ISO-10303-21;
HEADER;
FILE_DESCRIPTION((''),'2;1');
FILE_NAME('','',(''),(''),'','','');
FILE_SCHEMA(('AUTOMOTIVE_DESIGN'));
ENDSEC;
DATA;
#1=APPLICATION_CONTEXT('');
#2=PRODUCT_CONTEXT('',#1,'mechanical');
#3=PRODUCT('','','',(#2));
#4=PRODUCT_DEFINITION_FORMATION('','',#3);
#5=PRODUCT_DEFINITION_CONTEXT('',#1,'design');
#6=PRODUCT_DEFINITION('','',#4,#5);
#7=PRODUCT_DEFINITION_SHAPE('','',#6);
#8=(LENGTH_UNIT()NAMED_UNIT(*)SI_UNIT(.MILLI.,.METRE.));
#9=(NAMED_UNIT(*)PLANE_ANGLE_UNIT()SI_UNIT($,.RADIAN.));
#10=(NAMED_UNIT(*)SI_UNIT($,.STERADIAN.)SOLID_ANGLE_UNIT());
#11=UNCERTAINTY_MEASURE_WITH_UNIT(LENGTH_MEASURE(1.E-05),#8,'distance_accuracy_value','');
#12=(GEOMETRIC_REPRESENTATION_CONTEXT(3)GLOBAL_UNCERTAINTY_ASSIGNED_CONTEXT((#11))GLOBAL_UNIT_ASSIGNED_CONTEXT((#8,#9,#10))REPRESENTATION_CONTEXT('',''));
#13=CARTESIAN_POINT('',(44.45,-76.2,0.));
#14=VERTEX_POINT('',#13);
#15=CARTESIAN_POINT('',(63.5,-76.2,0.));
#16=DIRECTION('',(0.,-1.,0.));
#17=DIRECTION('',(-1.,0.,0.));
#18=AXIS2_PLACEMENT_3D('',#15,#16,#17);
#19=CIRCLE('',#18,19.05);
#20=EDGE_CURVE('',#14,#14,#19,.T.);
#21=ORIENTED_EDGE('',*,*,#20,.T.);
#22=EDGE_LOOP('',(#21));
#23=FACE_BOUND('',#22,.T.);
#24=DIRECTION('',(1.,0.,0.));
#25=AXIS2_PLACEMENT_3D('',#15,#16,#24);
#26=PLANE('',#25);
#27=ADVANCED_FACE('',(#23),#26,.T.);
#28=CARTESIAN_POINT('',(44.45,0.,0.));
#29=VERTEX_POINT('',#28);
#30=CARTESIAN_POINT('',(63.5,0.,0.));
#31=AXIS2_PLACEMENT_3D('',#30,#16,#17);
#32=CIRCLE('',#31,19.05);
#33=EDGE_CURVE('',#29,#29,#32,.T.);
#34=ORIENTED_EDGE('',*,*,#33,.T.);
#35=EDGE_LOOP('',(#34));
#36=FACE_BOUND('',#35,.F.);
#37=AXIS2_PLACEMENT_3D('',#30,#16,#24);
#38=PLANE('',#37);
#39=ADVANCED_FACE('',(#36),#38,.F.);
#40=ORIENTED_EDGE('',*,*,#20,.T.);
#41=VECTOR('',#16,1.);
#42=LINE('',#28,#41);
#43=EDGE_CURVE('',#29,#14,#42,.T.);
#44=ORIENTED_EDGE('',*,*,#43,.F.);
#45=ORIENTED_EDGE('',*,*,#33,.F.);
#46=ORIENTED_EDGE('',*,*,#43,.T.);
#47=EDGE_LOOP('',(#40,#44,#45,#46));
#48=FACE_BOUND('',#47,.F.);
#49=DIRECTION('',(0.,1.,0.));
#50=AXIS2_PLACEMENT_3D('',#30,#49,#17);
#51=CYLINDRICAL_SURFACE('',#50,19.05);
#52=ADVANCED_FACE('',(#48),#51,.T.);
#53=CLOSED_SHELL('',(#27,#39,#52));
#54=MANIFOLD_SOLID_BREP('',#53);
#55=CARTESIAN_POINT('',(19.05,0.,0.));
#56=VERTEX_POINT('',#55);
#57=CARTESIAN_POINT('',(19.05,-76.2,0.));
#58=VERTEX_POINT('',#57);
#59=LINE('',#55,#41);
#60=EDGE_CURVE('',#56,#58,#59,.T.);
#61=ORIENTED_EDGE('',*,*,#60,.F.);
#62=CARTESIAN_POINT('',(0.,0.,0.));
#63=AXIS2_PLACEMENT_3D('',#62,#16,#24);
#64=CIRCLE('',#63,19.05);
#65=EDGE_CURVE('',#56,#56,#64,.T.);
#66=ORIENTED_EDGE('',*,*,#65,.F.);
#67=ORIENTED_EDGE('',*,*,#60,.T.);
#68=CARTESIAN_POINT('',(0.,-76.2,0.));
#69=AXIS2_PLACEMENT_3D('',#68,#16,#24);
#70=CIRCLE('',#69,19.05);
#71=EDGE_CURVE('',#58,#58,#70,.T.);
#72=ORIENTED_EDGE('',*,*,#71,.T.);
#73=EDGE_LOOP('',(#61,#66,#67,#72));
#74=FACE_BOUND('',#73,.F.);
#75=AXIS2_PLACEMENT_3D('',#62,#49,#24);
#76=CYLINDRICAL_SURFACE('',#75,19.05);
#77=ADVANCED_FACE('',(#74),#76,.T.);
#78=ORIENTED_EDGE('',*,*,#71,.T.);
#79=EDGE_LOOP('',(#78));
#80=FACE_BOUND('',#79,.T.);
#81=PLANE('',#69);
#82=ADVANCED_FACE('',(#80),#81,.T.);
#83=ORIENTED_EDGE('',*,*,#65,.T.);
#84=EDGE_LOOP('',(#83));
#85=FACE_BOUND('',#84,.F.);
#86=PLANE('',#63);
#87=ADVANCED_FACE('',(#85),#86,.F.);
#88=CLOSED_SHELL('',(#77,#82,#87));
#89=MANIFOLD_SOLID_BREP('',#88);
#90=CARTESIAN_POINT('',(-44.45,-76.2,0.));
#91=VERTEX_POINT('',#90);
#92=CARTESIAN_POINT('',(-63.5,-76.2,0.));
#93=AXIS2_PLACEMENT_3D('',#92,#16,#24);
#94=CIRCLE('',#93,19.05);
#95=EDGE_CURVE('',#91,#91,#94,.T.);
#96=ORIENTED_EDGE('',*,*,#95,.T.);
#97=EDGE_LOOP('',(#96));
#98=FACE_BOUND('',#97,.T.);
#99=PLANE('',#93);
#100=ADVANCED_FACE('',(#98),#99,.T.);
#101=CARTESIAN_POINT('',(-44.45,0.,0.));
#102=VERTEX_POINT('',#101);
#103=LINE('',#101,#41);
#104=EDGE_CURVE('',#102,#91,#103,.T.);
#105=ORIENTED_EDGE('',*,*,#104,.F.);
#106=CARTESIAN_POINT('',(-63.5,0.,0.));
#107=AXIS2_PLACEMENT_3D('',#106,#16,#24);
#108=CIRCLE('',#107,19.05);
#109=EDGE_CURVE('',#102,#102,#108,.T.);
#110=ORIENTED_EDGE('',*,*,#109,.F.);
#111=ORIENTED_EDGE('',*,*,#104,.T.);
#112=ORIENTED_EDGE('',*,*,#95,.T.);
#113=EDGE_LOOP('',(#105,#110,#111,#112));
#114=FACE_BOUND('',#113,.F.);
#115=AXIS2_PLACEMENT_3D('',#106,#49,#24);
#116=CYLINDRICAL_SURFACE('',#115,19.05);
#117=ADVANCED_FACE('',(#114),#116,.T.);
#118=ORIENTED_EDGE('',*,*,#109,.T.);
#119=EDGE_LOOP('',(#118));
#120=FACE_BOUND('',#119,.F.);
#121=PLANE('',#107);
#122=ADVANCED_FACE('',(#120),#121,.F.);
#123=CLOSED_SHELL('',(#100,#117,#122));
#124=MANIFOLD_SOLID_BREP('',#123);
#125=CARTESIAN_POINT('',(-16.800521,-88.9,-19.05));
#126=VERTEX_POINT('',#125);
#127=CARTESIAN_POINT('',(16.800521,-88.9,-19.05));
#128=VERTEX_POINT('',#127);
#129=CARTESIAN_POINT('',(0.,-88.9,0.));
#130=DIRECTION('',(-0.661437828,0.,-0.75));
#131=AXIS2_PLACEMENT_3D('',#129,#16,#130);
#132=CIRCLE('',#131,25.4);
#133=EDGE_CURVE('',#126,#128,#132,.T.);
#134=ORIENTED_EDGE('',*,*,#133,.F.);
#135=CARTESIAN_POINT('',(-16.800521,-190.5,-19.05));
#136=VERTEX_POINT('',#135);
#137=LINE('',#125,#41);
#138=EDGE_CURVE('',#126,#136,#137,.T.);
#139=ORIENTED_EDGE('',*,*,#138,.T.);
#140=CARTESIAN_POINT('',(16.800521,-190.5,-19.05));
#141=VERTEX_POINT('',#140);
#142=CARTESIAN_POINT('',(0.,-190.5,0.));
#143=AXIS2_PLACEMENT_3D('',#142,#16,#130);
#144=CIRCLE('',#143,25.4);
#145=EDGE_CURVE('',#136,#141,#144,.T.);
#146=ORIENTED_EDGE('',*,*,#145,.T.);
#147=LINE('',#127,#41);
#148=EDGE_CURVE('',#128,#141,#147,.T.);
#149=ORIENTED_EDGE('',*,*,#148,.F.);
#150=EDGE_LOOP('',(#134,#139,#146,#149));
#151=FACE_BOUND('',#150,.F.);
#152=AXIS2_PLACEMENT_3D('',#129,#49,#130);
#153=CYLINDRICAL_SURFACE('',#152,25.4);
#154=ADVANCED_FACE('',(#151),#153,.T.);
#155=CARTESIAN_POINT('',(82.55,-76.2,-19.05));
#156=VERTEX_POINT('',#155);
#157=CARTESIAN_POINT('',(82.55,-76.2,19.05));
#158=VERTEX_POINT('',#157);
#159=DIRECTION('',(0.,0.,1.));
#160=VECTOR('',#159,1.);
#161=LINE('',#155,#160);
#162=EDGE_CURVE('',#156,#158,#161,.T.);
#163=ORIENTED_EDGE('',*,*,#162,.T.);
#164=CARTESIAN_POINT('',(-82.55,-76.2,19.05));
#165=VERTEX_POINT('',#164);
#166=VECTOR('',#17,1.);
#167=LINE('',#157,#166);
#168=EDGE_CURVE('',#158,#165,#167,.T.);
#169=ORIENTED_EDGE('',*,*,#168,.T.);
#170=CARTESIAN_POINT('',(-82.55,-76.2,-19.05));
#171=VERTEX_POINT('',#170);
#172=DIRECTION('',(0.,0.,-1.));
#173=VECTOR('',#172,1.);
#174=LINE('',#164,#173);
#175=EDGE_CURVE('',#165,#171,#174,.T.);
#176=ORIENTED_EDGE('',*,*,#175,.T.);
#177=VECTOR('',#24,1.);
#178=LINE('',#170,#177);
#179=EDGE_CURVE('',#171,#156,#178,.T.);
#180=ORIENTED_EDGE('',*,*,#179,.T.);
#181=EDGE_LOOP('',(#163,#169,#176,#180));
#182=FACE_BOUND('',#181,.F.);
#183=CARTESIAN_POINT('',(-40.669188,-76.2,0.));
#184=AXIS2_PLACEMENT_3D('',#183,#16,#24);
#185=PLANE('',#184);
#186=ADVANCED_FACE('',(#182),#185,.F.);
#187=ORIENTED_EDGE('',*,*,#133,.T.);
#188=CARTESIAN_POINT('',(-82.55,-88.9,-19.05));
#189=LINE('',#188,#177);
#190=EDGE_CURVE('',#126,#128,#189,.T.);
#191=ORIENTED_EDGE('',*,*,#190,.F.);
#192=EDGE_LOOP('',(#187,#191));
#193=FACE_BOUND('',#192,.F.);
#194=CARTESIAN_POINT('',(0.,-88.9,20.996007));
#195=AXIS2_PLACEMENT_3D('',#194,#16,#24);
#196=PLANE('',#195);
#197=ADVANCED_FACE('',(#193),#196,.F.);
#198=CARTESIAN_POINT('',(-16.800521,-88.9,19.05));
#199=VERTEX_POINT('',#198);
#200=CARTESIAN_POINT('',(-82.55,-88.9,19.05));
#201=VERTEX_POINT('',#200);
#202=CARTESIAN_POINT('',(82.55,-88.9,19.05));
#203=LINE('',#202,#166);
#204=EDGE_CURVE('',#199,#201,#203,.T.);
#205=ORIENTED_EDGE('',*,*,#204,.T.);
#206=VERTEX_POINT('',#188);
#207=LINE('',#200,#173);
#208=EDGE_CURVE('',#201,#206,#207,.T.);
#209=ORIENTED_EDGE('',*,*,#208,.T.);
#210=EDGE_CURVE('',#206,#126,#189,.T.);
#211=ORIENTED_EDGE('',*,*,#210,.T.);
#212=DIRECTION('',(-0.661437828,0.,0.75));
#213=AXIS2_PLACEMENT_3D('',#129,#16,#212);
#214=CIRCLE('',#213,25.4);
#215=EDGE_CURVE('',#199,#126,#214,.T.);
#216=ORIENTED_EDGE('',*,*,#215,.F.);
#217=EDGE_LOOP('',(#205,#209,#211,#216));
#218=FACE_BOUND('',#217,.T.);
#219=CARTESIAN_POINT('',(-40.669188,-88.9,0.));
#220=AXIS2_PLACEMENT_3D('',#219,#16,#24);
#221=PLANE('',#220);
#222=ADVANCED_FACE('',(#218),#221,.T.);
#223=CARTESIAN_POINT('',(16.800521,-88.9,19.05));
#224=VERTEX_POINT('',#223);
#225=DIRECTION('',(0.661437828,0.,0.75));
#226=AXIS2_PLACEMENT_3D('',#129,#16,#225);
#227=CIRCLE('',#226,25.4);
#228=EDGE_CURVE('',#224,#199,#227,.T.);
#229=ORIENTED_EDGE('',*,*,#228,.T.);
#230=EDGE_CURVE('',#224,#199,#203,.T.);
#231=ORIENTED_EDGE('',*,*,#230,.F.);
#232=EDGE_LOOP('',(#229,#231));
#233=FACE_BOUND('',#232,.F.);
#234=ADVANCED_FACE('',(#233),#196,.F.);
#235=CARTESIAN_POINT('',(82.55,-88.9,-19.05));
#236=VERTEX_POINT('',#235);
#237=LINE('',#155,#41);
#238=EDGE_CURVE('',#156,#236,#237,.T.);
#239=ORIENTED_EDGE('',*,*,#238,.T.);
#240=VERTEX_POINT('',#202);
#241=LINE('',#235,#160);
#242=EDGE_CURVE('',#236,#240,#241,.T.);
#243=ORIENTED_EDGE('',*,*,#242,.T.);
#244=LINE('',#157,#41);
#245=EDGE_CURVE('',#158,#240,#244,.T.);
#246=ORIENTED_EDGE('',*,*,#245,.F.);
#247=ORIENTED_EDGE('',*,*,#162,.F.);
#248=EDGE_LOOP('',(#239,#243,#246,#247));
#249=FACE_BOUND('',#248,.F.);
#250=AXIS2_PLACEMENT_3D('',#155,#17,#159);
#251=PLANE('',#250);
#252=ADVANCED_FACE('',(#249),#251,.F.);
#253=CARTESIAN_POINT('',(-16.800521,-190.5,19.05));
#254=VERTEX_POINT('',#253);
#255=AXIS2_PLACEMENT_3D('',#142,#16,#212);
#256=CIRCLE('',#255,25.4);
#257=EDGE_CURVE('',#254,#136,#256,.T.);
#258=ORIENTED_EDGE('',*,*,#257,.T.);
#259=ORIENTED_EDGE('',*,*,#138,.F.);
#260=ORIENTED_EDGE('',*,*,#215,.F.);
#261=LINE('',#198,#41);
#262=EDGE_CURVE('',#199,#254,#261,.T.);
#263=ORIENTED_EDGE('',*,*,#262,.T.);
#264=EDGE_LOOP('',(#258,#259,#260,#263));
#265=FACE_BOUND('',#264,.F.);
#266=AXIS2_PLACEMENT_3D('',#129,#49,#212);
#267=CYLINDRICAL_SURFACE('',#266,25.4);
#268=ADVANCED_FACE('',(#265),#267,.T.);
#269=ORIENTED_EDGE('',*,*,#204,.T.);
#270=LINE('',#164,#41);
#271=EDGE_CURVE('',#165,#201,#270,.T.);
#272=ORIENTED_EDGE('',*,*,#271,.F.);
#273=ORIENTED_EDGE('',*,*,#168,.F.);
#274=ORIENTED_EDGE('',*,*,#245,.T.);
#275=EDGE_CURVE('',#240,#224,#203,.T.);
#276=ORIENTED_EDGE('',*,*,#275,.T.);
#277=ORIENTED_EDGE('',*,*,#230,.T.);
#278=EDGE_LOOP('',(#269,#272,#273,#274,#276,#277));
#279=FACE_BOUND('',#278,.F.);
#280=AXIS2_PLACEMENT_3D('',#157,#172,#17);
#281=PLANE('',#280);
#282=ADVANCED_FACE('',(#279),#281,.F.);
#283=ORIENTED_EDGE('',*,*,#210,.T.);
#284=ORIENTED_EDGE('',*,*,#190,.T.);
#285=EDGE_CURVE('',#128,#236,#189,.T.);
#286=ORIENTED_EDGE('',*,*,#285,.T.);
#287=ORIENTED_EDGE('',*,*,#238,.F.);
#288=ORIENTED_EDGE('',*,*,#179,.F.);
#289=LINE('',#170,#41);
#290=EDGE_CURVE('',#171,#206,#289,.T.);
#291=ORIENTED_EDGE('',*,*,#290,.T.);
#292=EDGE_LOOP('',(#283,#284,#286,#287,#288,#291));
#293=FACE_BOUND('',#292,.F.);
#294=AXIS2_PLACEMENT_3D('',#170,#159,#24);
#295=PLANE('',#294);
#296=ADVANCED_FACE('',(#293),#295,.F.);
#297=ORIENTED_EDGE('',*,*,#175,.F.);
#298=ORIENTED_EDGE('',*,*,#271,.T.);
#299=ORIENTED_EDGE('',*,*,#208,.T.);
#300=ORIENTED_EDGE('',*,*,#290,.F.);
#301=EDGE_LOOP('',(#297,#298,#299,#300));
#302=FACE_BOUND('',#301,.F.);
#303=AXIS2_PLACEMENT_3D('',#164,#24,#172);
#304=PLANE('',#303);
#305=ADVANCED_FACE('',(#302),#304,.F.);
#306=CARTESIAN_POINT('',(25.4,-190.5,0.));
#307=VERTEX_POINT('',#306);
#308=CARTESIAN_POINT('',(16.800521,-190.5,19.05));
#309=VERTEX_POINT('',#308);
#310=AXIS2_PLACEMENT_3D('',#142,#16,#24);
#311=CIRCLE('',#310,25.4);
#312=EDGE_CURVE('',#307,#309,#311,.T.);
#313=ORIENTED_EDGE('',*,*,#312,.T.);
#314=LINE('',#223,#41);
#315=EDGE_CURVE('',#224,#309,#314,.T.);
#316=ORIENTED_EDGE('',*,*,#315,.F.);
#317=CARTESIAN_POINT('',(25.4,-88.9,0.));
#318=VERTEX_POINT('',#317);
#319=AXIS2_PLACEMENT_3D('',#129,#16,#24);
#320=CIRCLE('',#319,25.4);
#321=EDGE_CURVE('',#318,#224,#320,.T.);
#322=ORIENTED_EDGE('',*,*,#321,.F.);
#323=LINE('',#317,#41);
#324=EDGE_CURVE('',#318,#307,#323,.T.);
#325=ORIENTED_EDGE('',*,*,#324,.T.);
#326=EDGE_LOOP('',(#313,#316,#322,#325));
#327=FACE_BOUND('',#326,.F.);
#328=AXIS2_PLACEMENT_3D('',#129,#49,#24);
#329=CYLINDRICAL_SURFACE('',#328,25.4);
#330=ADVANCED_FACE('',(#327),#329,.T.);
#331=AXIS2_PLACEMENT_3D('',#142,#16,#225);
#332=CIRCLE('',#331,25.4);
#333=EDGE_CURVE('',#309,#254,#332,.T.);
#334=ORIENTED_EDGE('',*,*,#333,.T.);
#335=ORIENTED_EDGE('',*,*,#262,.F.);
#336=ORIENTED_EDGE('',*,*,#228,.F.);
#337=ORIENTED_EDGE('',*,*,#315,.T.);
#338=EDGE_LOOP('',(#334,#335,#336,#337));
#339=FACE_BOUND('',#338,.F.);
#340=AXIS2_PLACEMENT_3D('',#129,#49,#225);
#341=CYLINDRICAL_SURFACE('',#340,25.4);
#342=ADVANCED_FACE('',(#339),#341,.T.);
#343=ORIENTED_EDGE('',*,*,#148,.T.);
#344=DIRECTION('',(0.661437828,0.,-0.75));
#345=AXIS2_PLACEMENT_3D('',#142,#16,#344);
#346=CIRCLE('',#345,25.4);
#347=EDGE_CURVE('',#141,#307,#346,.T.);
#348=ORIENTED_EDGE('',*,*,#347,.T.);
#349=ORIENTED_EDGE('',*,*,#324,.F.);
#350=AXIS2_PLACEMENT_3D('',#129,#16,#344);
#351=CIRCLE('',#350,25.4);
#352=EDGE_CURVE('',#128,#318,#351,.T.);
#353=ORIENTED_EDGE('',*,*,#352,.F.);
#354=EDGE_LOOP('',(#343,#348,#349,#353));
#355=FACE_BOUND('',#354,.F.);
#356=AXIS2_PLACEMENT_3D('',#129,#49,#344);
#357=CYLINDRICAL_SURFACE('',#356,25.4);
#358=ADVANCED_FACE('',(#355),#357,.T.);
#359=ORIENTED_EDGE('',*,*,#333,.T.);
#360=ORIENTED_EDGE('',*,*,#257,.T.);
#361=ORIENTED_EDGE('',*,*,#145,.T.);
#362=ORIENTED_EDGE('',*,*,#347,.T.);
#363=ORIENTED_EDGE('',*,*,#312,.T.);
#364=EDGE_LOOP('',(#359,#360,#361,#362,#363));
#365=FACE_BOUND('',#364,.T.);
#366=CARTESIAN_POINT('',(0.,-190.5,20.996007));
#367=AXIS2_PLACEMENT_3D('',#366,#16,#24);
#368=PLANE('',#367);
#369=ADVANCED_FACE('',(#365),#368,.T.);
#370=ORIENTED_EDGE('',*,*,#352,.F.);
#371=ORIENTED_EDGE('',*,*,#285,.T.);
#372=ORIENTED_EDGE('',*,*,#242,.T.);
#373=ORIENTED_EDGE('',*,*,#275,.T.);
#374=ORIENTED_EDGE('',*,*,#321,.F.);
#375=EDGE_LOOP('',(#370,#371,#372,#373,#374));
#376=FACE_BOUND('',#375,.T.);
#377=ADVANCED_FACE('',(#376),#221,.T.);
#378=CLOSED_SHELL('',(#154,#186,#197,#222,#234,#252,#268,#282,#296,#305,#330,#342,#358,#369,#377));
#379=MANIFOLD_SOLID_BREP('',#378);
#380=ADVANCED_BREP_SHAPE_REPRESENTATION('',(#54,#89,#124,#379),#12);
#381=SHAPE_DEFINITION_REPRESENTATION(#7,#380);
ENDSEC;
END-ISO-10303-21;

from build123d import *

# Parameters (mm, degrees)
F1_DEPTH = 76.2
F0_R     = 19.05
F3_DEPTH = 12.7
F5_DEPTH = 101.6


with BuildPart() as f1:
    # F0 (on Front) → F1 (new body)
    with BuildSketch(Plane.XZ):
        with BuildLine():
            ThreePointArc((-19.05, 0), (0, -19.05), (19.05, 0))
            ThreePointArc((19.05, 0), (0, 19.05), (-19.05, 0))
        make_face()
    extrude(amount=F1_DEPTH)


with BuildPart() as f1b:
    # F0 (on Front) → F1, piece 2 (new body)
    with BuildSketch(Plane.XZ):
        with Locations((-63.5, 0)):
            Circle(F0_R)
    extrude(amount=F1_DEPTH)


with BuildPart() as f1c:
    # F0 (on Front) → F1, piece 3 (new body)
    with BuildSketch(Plane.XZ):
        with BuildLine():
            ThreePointArc((82.55, 0), (63.5, 19.05), (44.45, 0))
            ThreePointArc((44.45, 0), (63.5, -19.05), (82.55, 0))
        make_face()
    extrude(amount=F1_DEPTH)


with BuildPart() as f3:
    # F2 (on face) → F3 (new body)
    with BuildSketch(Plane.XZ.offset(76.2)):
        with BuildLine():
            ThreePointArc((-9.66e-08, -19.05), (-19.05, 1.085e-07), (1.205e-07, 19.05))
            Line((1.205e-07, 19.05), (-82.55, 19.05))
            Line((-82.55, 19.05), (-82.55, -19.05))
            Line((-82.55, -19.05), (-9.66e-08, -19.05))
        make_face()
        with BuildLine():
            Line((82.55, -19.05), (82.55, 19.05))
            Line((82.55, 19.05), (1.205e-07, 19.05))
            ThreePointArc((1.205e-07, 19.05), (13.4703842242, 13.470384139), (19.05, 0))
            ThreePointArc((19.05, 0), (13.4703841474, -13.4703842158), (-9.66e-08, -19.05))
            Line((-9.66e-08, -19.05), (82.55, -19.05))
        make_face()
        with BuildLine():
            ThreePointArc((19.05, 0), (13.4703842242, 13.470384139), (1.205e-07, 19.05))
            ThreePointArc((1.205e-07, 19.05), (-19.05, 1.085e-07), (-9.66e-08, -19.05))
            ThreePointArc((-9.66e-08, -19.05), (13.4703841474, -13.4703842158), (19.05, 0))
        make_face()
    extrude(amount=F3_DEPTH)

    # F4 (on face) → F5 (join)
    with BuildSketch(Plane.XZ.offset(88.9)):
        with BuildLine():
            Line((-16.8005208253, 19.05), (16.8005208253, 19.05))
            ThreePointArc((16.8005208253, 19.05), (0, 25.4), (-16.8005208253, 19.05))
        make_face()
        with BuildLine():
            ThreePointArc((16.8005208253, -19.05), (23.1505208253, -10.4505208253), (25.4, 0))
            ThreePointArc((25.4, 0), (23.1505208253, 10.4505208253), (16.8005208253, 19.05))
            Line((16.8005208253, 19.05), (-16.8005208253, 19.05))
            ThreePointArc((-16.8005208253, 19.05), (-25.4, 0), (-16.8005208253, -19.05))
            Line((-16.8005208253, -19.05), (16.8005208253, -19.05))
        make_face()
        with BuildLine():
            ThreePointArc((-16.8005208253, -19.05), (0, -25.4), (16.8005208253, -19.05))
            Line((16.8005208253, -19.05), (-16.8005208253, -19.05))
        make_face()
    extrude(amount=F5_DEPTH)


solid = Compound([f1.part, f1b.part, f1c.part, f3.part])
